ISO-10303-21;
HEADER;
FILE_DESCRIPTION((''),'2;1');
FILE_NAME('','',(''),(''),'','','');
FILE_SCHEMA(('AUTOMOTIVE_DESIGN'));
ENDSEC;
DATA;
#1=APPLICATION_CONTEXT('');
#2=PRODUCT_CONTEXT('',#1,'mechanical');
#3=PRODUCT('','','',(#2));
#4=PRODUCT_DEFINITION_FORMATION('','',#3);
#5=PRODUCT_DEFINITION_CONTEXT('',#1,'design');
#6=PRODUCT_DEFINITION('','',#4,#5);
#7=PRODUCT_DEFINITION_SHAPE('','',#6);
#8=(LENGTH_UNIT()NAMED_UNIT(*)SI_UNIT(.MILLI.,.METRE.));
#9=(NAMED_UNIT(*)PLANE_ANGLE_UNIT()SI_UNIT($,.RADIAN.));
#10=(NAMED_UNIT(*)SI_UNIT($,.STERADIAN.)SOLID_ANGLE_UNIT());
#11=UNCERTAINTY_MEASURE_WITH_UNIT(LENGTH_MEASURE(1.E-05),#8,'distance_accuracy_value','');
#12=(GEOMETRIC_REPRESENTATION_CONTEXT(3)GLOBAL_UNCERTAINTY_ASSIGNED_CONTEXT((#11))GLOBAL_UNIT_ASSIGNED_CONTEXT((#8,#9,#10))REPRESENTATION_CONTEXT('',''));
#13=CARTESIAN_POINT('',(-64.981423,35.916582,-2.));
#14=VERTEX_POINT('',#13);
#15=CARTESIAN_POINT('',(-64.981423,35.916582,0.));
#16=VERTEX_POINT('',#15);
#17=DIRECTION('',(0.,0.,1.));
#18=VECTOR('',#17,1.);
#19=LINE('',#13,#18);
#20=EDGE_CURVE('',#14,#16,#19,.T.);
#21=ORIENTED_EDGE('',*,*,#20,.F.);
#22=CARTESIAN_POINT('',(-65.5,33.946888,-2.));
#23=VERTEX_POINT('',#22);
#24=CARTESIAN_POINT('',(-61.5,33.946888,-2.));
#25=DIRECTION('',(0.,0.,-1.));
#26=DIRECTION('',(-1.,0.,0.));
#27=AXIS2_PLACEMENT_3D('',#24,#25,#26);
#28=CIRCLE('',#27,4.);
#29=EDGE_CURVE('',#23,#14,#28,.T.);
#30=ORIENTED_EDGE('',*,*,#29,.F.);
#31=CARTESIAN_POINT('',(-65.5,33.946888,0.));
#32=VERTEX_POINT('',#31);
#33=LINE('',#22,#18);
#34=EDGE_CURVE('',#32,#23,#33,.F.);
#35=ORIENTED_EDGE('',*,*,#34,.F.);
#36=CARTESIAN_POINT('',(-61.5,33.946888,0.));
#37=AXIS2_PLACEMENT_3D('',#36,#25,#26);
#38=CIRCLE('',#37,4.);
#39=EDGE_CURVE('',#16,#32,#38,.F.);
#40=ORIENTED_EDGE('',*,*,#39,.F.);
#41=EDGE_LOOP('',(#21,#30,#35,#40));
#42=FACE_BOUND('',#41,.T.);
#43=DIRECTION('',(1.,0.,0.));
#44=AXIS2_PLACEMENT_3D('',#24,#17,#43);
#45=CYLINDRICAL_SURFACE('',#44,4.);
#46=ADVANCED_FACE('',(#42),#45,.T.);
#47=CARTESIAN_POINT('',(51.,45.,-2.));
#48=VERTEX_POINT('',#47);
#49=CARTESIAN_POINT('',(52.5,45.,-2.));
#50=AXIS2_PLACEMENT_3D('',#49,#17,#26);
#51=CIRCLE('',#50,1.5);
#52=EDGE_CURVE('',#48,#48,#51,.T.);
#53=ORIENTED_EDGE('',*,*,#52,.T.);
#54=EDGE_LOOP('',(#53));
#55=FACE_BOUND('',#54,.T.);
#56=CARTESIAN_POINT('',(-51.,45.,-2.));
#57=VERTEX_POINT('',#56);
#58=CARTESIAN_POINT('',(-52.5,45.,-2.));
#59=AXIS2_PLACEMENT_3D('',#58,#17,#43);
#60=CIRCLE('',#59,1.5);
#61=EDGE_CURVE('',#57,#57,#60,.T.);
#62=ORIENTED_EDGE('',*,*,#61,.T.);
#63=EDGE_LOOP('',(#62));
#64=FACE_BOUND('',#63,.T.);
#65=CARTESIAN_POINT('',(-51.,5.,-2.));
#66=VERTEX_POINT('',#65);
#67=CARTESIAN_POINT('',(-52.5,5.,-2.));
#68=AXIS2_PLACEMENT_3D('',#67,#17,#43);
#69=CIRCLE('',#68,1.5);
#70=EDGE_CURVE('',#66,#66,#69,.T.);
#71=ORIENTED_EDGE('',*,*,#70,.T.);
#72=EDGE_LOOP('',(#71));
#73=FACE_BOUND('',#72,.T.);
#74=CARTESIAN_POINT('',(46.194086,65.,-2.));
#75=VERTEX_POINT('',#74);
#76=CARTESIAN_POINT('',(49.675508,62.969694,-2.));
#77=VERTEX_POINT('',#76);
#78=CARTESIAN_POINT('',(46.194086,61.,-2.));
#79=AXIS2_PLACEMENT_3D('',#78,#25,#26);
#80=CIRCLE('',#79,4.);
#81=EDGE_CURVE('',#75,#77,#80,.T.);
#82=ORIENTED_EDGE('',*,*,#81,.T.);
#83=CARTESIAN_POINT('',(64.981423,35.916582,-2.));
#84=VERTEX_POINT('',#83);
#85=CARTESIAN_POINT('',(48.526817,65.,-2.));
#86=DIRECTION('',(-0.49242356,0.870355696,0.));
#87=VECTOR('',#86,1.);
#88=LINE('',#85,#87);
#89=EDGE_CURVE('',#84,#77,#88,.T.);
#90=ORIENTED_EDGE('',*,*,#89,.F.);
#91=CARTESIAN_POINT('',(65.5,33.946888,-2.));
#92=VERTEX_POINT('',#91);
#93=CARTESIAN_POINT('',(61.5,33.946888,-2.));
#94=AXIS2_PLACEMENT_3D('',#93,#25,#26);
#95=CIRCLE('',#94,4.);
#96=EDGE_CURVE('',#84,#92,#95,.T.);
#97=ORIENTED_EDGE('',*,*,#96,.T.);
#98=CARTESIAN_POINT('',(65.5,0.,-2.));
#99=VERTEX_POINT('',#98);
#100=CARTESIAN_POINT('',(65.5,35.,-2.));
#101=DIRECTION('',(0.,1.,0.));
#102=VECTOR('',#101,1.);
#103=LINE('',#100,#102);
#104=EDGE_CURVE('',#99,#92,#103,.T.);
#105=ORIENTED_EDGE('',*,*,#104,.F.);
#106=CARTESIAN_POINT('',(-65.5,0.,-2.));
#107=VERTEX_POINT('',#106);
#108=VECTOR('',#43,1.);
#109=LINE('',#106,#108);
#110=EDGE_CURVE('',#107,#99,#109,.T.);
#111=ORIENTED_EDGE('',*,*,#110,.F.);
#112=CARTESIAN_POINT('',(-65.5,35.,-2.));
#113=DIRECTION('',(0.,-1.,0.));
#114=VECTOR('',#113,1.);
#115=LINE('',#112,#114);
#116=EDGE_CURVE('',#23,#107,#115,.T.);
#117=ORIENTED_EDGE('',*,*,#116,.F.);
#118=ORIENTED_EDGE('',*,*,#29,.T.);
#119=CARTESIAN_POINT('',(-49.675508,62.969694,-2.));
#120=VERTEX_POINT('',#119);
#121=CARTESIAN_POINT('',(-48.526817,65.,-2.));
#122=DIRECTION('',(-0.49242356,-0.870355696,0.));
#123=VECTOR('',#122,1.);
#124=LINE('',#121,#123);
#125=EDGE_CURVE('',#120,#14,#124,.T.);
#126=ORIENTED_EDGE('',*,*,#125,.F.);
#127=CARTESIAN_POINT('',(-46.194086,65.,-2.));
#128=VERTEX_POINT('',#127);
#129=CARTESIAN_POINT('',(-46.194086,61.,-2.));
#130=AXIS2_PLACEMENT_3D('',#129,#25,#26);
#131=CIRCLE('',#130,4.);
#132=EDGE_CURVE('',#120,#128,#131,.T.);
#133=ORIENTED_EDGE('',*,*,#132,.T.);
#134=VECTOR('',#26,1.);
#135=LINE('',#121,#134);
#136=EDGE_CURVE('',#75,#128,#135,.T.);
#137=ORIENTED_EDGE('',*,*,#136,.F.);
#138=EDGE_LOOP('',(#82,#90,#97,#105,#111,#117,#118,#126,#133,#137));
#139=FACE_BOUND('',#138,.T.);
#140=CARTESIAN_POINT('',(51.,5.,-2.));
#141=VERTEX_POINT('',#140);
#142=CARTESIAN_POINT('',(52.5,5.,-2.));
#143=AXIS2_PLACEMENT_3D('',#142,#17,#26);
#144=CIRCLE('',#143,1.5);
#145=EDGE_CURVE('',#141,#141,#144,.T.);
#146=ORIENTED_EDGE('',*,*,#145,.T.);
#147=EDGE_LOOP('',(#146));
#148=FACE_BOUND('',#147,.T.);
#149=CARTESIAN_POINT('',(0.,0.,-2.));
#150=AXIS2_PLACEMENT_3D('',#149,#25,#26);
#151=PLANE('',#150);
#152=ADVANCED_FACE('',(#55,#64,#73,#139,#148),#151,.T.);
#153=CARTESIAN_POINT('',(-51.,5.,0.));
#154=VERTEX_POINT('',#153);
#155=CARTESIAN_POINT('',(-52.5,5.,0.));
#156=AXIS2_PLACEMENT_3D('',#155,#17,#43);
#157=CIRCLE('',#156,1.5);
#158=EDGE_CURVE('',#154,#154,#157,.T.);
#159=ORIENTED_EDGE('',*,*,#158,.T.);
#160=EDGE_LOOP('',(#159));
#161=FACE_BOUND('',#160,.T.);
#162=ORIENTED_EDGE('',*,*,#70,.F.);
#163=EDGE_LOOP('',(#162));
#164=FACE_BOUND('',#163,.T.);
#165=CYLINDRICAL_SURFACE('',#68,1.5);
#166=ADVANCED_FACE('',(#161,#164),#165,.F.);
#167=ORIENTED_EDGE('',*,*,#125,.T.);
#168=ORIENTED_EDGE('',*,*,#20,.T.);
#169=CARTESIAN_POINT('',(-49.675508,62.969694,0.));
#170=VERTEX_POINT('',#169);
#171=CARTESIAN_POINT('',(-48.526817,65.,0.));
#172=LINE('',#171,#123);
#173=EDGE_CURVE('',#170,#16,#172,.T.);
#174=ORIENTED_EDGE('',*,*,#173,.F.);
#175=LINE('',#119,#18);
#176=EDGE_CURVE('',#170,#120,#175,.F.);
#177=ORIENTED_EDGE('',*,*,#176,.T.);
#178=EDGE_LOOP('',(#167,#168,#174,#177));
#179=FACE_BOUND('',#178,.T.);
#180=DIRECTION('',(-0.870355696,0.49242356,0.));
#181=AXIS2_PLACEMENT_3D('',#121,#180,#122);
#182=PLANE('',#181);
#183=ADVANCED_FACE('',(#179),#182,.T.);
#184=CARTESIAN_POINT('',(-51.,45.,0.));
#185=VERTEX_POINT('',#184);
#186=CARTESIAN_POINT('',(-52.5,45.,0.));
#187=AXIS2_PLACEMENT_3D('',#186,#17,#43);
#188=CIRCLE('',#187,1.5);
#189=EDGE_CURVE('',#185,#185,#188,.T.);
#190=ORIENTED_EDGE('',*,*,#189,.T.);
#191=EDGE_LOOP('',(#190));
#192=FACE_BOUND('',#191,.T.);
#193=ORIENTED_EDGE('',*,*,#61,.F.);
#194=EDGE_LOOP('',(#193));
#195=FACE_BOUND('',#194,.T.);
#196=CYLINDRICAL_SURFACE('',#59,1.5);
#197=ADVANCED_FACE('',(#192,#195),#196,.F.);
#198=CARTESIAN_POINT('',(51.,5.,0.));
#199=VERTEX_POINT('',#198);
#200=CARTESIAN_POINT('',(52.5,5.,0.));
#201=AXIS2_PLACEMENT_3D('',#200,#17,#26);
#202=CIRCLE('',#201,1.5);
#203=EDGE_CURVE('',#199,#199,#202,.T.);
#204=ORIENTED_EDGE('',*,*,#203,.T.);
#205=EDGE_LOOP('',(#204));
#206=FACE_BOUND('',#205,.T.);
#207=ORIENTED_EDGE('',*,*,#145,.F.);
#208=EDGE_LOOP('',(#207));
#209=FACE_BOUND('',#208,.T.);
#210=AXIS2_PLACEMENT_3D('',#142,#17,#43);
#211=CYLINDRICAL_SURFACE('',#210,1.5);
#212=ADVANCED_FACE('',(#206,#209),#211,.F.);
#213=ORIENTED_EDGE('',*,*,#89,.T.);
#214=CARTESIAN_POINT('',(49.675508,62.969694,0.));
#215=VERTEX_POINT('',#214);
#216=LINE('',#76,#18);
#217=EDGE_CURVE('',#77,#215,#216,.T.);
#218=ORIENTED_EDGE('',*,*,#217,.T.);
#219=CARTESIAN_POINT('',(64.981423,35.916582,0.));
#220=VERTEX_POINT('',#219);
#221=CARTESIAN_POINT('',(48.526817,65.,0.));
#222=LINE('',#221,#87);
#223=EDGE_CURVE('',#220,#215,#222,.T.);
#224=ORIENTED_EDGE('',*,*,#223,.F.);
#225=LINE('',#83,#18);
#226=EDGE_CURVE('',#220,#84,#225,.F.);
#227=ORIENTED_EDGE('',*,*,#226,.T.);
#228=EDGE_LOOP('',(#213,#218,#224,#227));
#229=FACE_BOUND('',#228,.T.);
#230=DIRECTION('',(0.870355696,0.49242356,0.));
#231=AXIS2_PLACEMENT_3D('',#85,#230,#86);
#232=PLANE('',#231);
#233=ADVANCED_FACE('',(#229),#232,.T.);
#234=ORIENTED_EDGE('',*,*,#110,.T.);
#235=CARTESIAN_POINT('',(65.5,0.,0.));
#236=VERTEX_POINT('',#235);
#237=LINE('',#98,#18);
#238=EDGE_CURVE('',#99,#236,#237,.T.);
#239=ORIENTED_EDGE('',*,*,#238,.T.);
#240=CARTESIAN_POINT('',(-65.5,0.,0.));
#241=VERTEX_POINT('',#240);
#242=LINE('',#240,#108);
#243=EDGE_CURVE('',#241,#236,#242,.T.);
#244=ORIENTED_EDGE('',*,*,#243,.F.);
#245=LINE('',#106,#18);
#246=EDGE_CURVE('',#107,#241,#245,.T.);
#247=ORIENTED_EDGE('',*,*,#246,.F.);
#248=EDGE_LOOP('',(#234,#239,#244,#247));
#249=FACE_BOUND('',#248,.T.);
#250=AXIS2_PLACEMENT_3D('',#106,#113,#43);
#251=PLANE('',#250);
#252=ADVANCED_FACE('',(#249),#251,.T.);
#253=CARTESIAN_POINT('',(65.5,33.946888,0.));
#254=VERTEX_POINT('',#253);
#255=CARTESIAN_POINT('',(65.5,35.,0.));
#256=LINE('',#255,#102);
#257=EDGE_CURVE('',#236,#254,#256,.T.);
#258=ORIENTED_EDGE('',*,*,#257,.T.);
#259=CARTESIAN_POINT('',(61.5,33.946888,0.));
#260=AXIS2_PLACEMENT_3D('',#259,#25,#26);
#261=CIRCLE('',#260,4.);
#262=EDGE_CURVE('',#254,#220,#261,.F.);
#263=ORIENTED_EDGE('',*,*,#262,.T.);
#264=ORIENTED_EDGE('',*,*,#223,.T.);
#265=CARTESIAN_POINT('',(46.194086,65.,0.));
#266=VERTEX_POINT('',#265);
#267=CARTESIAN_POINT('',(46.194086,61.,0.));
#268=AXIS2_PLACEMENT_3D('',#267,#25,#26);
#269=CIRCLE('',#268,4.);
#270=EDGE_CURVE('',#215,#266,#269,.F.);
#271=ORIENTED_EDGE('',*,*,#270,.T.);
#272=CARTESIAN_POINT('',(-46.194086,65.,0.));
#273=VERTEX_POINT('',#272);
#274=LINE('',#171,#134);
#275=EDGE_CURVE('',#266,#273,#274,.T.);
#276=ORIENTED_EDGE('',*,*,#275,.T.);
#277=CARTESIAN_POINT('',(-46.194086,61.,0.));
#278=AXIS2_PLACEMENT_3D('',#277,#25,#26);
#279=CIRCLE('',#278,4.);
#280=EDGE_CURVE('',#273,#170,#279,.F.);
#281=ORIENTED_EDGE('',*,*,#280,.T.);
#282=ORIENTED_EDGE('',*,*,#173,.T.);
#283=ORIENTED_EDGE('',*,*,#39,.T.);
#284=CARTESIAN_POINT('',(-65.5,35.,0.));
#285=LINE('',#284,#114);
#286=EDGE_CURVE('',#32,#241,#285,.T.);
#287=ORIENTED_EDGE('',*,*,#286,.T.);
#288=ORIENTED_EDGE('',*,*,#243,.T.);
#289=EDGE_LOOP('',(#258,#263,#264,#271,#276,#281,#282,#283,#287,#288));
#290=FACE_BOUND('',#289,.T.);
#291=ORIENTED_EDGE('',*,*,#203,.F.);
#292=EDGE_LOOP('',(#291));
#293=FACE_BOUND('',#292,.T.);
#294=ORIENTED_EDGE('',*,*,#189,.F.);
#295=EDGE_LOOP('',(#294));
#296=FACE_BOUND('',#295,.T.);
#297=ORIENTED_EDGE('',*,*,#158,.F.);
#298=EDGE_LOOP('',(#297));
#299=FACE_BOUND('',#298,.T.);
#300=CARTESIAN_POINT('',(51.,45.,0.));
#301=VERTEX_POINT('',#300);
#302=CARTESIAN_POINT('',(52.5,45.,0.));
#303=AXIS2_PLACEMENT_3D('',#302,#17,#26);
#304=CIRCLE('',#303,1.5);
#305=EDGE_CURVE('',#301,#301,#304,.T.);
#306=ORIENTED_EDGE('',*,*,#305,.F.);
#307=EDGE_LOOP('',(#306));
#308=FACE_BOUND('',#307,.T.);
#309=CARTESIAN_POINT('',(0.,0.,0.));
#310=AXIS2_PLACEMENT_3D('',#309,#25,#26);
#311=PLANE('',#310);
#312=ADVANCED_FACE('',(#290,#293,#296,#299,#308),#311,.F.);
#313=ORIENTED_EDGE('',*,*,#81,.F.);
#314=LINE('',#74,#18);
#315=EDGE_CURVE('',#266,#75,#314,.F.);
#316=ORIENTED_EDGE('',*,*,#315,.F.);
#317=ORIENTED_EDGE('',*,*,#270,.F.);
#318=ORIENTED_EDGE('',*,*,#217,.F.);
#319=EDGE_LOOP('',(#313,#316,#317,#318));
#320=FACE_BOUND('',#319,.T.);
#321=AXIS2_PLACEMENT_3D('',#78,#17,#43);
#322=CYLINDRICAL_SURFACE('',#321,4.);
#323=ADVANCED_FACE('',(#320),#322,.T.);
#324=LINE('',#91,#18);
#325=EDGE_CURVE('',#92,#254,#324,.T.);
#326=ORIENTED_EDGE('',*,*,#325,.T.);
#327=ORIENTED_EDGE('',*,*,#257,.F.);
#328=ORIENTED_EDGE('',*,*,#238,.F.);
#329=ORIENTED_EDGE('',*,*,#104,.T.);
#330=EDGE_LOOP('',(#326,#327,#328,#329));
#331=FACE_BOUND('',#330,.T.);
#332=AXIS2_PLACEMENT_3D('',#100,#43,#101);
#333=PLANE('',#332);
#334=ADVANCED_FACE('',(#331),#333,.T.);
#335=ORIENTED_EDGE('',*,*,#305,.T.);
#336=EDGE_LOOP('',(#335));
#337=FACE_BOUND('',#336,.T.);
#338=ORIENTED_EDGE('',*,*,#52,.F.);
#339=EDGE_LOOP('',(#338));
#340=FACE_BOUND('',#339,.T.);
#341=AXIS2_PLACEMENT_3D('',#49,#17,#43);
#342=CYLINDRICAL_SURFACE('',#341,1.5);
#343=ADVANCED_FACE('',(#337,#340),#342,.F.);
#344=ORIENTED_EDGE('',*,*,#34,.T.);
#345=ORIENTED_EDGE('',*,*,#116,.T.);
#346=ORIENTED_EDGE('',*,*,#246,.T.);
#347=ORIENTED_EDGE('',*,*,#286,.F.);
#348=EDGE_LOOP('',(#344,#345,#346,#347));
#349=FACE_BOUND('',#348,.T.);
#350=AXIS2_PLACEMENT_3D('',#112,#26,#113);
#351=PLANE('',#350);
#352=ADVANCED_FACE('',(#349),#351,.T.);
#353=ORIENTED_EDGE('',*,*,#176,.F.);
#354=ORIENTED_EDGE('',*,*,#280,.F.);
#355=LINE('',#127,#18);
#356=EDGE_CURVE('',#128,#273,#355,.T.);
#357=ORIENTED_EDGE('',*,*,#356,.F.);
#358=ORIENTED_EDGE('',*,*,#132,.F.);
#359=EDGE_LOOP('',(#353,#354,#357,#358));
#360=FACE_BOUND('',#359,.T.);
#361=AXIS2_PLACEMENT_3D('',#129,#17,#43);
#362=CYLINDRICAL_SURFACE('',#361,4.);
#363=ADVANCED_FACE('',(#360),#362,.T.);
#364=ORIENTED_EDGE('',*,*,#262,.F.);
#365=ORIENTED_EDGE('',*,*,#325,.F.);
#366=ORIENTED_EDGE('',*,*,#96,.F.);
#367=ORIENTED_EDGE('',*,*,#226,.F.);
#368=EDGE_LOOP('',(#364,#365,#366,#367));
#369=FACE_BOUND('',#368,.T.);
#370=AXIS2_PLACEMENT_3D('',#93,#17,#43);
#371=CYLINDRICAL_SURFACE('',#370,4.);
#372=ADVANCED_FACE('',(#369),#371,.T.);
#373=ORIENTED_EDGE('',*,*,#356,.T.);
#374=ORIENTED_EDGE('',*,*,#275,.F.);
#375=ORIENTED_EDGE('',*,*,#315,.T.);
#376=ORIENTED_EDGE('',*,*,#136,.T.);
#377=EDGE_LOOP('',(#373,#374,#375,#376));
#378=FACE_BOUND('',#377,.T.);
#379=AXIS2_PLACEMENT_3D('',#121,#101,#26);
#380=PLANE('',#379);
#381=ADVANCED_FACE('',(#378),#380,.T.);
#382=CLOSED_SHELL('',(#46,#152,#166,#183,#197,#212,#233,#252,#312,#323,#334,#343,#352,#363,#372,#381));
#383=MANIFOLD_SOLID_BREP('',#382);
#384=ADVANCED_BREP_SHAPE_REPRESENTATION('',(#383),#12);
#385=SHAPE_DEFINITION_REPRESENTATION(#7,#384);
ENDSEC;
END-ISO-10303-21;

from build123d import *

# Parameters (mm, degrees)
ESQUISSE1_R               = 1.5
T_LE_DE_BASE_PLI_E1_DEPTH = 2
CONG_1_R                  = 4


# Sheet-metal steps are written as plain solids
with BuildPart() as part:
    # Esquisse1 → Tôle de base pliée1 (new body)
    with BuildSketch(Plane.XY):
        Polygon((-48.526816654, 65), (-65.5, 35), (-65.5, 0), (65.5, 0), (65.5, 35), (48.526816654, 65), align=None)
        with Locations((-52.5, 45)):
            Circle(ESQUISSE1_R, mode=Mode.SUBTRACT)
        with Locations((-52.5, 5)):
            Circle(ESQUISSE1_R, mode=Mode.SUBTRACT)
        with Locations(Location((52.5, 5, 0), (0, 0, 180))):
            Circle(ESQUISSE1_R, mode=Mode.SUBTRACT)
        with Locations(Location((52.5, 45, 0), (0, 0, 180))):
            Circle(ESQUISSE1_R, mode=Mode.SUBTRACT)
    extrude(amount=-T_LE_DE_BASE_PLI_E1_DEPTH)

    # Congé1
    cong_1_edges = [part.edges().sort_by_distance(p)[0] for p in [
        (-65.5, 35, -1),
        (-48.526816654, 65, -1),
        (48.526816654, 65, -1),
        (65.5, 35, -1),
    ]]
    fillet(cong_1_edges, radius=CONG_1_R)


solid = part.part
